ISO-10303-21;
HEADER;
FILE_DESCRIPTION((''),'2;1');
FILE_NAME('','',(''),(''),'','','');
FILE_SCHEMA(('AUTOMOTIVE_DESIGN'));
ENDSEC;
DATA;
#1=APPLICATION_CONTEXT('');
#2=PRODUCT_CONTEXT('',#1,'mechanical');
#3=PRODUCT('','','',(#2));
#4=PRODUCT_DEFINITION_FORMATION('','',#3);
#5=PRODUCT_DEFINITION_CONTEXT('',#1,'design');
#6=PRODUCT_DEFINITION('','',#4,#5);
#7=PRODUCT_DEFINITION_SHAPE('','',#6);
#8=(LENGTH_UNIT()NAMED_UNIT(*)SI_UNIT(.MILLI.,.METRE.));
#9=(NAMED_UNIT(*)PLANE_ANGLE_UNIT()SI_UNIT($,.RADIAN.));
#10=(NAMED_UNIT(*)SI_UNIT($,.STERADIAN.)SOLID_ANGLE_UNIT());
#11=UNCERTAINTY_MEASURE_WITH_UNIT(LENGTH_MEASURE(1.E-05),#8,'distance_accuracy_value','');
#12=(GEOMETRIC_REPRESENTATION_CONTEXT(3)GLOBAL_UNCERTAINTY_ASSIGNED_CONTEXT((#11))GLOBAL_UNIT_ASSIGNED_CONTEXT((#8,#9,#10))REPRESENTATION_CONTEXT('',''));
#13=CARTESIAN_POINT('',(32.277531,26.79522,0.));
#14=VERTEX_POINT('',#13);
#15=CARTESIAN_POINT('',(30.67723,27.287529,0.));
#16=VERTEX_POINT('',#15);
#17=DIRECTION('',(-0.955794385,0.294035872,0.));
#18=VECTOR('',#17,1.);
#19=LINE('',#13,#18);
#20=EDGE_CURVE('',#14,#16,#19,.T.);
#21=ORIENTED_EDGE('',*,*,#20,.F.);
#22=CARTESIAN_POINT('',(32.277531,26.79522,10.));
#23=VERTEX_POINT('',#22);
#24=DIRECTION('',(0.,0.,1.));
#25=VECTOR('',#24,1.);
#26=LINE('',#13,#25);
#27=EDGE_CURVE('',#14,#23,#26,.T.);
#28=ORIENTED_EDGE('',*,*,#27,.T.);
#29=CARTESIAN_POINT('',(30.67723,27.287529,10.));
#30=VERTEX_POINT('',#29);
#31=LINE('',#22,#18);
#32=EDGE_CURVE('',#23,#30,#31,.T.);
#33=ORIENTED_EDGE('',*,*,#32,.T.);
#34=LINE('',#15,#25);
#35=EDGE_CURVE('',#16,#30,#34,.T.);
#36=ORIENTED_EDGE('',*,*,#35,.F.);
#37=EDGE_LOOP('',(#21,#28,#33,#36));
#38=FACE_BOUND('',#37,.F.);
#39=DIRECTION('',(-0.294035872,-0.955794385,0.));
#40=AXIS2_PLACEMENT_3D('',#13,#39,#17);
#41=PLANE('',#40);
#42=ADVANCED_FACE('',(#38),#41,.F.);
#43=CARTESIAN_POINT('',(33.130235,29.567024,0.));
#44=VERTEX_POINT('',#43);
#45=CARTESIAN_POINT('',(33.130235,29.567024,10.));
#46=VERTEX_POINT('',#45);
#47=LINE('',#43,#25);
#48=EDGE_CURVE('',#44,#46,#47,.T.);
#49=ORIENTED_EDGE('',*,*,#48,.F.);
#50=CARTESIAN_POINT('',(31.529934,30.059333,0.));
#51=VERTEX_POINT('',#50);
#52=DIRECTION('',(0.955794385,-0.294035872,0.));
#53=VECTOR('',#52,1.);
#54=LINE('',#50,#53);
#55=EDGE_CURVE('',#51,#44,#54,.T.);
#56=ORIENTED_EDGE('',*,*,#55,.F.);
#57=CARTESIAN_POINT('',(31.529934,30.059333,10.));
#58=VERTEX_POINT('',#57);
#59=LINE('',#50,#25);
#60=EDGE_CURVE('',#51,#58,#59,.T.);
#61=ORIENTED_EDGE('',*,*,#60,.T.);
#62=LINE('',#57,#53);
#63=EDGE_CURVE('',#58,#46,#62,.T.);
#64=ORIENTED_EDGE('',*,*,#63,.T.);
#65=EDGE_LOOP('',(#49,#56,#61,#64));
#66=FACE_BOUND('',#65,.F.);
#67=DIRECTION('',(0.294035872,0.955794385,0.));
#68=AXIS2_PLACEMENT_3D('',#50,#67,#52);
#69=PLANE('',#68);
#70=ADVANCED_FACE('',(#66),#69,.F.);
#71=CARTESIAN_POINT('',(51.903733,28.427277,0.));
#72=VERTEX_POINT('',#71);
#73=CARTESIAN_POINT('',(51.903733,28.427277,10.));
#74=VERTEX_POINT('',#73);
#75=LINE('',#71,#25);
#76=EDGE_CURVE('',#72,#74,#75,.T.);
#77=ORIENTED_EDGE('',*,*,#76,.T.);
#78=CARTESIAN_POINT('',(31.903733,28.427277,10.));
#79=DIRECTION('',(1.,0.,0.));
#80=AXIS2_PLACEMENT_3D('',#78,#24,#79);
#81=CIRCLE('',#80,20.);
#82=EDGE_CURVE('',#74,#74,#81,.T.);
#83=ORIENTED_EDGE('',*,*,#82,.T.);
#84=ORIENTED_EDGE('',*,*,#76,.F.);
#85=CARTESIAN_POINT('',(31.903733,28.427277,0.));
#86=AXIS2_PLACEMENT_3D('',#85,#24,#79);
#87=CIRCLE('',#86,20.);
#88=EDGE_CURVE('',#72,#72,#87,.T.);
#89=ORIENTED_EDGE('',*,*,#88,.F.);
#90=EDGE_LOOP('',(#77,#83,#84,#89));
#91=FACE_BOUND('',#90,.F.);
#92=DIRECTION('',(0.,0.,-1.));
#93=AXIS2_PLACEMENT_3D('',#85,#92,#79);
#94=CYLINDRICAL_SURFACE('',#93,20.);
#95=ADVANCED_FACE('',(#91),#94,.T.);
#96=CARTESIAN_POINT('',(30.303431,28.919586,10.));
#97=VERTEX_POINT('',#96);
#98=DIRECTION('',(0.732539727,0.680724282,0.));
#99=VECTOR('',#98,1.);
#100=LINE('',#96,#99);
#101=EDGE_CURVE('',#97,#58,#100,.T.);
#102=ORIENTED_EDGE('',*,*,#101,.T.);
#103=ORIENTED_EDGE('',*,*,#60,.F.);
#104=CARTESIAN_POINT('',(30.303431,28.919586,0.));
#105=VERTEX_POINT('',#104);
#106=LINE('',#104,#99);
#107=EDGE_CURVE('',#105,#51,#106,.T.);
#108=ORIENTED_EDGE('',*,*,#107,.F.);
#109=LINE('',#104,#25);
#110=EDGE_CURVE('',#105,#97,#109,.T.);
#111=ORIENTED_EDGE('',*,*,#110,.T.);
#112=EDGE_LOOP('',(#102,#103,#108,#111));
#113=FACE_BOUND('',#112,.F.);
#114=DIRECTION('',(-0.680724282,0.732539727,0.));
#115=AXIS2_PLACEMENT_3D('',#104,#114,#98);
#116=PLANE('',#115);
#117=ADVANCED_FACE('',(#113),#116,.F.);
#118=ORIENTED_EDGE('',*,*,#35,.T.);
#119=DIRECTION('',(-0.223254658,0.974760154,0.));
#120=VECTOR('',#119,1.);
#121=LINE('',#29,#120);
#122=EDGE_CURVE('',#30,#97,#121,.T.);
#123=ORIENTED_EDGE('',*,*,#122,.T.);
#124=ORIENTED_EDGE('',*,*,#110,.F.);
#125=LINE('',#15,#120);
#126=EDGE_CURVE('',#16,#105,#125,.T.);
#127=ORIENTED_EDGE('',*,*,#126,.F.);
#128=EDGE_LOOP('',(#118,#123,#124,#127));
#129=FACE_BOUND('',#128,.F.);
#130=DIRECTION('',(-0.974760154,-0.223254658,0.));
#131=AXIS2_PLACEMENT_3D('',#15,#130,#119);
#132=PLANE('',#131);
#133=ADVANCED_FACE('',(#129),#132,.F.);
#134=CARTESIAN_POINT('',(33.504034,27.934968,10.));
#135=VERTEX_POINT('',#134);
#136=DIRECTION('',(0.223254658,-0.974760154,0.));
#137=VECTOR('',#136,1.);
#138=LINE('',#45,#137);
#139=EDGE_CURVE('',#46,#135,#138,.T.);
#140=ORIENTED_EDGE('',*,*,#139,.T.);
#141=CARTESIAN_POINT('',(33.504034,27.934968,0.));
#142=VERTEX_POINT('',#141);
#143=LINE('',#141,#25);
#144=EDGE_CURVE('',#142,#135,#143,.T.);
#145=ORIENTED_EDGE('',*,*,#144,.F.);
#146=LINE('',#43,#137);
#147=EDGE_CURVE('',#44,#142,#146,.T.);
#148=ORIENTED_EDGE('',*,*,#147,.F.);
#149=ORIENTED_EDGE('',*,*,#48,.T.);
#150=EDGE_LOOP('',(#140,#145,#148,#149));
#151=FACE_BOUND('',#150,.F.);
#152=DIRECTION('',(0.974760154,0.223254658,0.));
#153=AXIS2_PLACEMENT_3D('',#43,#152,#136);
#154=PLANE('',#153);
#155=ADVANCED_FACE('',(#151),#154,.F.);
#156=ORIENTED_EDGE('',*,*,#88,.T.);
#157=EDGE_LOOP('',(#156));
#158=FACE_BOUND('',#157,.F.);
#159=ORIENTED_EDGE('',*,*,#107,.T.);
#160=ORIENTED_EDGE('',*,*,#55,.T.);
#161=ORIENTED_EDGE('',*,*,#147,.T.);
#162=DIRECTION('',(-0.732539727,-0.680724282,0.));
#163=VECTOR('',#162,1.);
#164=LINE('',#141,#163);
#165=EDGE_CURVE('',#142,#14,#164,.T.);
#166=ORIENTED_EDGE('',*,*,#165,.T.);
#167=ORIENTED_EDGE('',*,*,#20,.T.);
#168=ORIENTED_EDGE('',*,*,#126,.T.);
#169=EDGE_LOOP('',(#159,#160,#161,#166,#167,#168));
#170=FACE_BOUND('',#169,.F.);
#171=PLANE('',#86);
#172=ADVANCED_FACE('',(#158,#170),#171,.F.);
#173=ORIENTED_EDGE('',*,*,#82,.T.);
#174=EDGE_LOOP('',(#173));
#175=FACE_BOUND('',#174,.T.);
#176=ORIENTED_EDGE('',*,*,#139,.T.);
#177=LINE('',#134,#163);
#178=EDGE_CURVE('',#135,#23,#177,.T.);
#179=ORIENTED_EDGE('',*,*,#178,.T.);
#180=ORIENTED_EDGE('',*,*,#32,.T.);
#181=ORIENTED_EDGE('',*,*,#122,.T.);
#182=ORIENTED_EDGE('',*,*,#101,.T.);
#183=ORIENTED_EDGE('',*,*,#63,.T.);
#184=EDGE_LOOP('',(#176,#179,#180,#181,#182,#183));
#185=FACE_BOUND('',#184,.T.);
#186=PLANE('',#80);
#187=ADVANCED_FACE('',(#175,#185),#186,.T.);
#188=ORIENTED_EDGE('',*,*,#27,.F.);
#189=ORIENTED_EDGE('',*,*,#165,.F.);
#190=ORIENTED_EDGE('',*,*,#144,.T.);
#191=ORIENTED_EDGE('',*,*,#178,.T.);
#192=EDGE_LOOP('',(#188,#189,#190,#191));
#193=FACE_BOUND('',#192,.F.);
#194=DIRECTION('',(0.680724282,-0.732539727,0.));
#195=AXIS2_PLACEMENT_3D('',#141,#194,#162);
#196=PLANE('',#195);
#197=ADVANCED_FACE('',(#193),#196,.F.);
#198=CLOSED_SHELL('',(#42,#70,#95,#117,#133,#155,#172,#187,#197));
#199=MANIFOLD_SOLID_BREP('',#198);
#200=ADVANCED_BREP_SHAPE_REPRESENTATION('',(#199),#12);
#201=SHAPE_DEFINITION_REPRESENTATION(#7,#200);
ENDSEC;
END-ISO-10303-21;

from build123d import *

# Parameters (mm, degrees)
F0_R     = 20
F1_DEPTH = 10
F2_DEPTH = 10


# Not quite as in the source:
# - a feature names something its author has since deleted; it is built from what else it names


with BuildPart() as f1:
    # F0 (on Top) → F1 (new body)
    with BuildSketch(Plane.XY):
        with Locations((31.903732568, 28.4272767603)):
            Circle(F0_R)
        Polygon((33.1302353929, 29.5670241683), (33.5040341896, 27.9349678601), (32.2775313647, 26.7952204522), (30.6772297431, 27.2875293524), (30.3034309464, 28.9195856605), (31.5299337713, 30.0593330685), align=None, mode=Mode.SUBTRACT)
    extrude(amount=F1_DEPTH)

    # F0 (on Top) → F2 (join)
    with BuildSketch(Plane.XY):
        with Locations((31.903732568, 28.4272767603)):
            Circle(F0_R)
        Polygon((33.1302353929, 29.5670241683), (33.5040341896, 27.9349678601), (32.2775313647, 26.7952204522), (30.6772297431, 27.2875293524), (30.3034309464, 28.9195856605), (31.5299337713, 30.0593330685), align=None, mode=Mode.SUBTRACT)
    extrude(amount=F2_DEPTH)


solid = f1.part
